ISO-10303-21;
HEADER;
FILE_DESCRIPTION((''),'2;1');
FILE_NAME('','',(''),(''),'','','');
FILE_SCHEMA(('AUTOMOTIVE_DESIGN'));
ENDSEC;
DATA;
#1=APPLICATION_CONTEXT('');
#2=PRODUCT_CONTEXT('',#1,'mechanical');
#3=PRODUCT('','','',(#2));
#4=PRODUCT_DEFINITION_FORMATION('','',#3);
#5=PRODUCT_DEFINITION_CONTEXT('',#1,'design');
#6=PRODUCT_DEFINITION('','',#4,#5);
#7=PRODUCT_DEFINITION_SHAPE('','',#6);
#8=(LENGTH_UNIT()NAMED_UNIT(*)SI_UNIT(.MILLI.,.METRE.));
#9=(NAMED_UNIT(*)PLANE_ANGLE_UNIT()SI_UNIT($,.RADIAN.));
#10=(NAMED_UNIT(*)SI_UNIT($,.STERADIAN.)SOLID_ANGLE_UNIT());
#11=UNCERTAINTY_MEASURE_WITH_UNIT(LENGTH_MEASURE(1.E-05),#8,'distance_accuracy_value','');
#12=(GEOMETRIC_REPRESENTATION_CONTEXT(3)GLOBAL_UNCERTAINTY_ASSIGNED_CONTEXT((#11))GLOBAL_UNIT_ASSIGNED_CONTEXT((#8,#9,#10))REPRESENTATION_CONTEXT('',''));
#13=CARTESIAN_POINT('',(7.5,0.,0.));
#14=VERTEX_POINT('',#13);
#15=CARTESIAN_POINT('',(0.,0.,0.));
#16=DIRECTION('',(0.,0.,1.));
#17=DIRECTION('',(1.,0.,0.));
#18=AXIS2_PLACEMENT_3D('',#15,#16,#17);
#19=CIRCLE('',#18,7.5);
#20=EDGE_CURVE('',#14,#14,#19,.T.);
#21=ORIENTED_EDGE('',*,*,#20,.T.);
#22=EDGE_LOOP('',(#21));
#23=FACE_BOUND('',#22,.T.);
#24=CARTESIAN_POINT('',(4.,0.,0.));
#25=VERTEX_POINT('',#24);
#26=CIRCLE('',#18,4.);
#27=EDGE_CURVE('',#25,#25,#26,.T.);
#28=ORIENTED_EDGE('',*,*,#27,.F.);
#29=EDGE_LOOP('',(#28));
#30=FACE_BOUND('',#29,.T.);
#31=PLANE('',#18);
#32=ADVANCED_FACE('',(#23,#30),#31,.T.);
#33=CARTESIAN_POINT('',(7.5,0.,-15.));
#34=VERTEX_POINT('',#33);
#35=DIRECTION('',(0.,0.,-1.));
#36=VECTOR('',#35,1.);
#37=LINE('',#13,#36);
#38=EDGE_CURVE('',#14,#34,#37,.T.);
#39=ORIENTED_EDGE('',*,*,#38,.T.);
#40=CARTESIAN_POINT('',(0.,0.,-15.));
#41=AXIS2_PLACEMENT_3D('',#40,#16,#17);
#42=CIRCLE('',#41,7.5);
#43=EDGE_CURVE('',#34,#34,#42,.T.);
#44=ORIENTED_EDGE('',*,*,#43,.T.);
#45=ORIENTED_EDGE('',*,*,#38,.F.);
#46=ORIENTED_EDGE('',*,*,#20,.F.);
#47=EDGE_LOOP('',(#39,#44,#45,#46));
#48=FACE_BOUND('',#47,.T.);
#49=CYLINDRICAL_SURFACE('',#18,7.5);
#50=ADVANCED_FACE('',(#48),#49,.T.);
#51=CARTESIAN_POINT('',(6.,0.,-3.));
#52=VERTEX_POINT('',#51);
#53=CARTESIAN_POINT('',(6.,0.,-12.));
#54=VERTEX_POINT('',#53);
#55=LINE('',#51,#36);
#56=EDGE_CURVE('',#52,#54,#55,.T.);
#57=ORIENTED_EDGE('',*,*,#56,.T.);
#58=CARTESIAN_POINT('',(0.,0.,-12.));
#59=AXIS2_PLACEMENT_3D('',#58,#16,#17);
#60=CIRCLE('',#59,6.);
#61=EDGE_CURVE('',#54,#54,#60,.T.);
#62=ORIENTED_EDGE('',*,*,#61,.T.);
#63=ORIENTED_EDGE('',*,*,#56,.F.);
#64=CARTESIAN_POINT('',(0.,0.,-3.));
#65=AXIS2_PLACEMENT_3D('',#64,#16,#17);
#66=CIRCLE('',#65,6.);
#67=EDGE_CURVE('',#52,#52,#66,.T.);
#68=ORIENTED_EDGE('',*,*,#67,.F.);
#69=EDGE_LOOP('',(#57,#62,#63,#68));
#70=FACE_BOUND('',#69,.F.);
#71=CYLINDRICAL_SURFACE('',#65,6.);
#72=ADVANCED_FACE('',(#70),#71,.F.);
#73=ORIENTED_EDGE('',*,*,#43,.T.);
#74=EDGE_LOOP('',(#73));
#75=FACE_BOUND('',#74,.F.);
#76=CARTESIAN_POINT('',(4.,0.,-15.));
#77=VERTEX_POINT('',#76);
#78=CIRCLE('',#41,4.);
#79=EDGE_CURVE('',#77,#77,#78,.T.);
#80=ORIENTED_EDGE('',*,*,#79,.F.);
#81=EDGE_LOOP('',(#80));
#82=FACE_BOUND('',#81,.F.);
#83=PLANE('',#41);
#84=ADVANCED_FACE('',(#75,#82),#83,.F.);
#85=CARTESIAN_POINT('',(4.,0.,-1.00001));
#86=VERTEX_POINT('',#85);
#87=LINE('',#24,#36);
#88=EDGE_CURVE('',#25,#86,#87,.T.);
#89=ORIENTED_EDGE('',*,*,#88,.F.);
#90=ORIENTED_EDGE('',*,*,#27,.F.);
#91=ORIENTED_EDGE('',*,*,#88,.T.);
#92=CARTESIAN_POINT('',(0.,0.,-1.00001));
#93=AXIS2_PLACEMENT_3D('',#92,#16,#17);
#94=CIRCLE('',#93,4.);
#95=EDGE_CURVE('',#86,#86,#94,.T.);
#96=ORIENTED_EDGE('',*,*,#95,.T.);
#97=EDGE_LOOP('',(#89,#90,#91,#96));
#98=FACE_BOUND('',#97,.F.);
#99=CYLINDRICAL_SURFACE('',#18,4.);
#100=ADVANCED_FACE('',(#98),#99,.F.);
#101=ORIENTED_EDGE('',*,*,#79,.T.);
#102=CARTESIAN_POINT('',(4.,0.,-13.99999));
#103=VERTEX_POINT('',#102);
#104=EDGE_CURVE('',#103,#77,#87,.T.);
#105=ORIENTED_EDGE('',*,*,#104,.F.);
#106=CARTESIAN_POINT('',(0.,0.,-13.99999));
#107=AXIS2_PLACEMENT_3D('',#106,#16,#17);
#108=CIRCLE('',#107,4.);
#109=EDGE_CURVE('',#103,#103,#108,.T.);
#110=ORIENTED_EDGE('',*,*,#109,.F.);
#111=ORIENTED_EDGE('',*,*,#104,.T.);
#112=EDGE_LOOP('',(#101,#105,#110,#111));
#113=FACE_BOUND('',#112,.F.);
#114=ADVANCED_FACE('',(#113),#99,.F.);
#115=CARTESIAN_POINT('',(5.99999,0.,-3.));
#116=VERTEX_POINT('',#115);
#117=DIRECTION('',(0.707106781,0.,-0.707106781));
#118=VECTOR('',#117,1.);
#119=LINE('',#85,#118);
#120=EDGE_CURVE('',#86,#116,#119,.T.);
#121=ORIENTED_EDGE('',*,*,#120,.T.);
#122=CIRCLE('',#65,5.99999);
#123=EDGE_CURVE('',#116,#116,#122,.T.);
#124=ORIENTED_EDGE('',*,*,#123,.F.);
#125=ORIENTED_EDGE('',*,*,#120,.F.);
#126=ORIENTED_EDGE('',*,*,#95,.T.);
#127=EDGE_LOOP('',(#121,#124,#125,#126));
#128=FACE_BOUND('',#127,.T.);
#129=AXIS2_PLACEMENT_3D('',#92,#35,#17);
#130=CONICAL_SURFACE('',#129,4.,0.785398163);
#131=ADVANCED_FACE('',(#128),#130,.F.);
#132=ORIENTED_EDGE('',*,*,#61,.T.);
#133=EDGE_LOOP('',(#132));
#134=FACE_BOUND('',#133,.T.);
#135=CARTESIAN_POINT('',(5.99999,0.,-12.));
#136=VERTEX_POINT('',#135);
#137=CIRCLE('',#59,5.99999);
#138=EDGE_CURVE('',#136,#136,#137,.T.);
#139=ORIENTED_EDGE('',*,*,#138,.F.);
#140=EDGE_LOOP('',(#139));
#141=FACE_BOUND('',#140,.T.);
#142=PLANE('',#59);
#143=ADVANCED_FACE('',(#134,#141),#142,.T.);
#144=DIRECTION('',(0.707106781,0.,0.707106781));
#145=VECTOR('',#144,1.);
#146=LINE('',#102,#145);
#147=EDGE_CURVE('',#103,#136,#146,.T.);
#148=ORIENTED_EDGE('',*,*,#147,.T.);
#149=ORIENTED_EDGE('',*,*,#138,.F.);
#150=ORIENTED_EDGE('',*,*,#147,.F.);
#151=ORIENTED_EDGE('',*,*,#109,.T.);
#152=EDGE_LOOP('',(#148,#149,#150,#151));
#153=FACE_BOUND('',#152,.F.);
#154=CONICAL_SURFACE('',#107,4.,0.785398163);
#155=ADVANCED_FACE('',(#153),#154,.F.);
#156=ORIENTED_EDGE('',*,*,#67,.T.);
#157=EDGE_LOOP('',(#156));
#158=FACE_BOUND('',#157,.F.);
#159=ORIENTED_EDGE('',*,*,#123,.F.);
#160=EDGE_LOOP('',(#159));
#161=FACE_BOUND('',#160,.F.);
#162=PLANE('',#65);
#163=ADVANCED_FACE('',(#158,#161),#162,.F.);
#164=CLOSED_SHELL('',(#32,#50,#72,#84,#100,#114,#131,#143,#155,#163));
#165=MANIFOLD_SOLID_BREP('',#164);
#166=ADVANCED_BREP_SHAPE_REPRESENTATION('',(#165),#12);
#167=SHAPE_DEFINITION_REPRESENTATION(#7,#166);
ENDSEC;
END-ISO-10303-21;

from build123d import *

# Parameters (mm, degrees)
F0_R     = 7.5
F0_R_2   = 4
F2_DEPTH = 15
F3_R     = 6
F4_DEPTH = 9
F5_SIZE  = 1.99999


# Not quite as in the source:
# - a fillet or chamfer is up to 0.001 mm smaller than in the source, because OpenCascade refuses the exact size


with BuildPart() as f2:
    # F0 (on Top) → F2 (new body)
    with BuildSketch(Plane.XY):
        Circle(F0_R)
        Circle(F0_R_2, mode=Mode.SUBTRACT)
    extrude(amount=-F2_DEPTH)

    # F3 (on offset) → F4 (cut)
    with BuildSketch(Plane.XY.offset(-3)):
        Circle(F3_R)
    extrude(amount=-F4_DEPTH, mode=Mode.SUBTRACT)

    # F5 (size 2 in the source; OpenCascade refuses exactly that, so slightly less here)
    f5_edges = [f2.edges().sort_by_distance(p)[0] for p in [
        (-4, 0, -3),
        (-4, 0, -12),
    ]]
    chamfer(f5_edges, length=F5_SIZE)


solid = f2.part
